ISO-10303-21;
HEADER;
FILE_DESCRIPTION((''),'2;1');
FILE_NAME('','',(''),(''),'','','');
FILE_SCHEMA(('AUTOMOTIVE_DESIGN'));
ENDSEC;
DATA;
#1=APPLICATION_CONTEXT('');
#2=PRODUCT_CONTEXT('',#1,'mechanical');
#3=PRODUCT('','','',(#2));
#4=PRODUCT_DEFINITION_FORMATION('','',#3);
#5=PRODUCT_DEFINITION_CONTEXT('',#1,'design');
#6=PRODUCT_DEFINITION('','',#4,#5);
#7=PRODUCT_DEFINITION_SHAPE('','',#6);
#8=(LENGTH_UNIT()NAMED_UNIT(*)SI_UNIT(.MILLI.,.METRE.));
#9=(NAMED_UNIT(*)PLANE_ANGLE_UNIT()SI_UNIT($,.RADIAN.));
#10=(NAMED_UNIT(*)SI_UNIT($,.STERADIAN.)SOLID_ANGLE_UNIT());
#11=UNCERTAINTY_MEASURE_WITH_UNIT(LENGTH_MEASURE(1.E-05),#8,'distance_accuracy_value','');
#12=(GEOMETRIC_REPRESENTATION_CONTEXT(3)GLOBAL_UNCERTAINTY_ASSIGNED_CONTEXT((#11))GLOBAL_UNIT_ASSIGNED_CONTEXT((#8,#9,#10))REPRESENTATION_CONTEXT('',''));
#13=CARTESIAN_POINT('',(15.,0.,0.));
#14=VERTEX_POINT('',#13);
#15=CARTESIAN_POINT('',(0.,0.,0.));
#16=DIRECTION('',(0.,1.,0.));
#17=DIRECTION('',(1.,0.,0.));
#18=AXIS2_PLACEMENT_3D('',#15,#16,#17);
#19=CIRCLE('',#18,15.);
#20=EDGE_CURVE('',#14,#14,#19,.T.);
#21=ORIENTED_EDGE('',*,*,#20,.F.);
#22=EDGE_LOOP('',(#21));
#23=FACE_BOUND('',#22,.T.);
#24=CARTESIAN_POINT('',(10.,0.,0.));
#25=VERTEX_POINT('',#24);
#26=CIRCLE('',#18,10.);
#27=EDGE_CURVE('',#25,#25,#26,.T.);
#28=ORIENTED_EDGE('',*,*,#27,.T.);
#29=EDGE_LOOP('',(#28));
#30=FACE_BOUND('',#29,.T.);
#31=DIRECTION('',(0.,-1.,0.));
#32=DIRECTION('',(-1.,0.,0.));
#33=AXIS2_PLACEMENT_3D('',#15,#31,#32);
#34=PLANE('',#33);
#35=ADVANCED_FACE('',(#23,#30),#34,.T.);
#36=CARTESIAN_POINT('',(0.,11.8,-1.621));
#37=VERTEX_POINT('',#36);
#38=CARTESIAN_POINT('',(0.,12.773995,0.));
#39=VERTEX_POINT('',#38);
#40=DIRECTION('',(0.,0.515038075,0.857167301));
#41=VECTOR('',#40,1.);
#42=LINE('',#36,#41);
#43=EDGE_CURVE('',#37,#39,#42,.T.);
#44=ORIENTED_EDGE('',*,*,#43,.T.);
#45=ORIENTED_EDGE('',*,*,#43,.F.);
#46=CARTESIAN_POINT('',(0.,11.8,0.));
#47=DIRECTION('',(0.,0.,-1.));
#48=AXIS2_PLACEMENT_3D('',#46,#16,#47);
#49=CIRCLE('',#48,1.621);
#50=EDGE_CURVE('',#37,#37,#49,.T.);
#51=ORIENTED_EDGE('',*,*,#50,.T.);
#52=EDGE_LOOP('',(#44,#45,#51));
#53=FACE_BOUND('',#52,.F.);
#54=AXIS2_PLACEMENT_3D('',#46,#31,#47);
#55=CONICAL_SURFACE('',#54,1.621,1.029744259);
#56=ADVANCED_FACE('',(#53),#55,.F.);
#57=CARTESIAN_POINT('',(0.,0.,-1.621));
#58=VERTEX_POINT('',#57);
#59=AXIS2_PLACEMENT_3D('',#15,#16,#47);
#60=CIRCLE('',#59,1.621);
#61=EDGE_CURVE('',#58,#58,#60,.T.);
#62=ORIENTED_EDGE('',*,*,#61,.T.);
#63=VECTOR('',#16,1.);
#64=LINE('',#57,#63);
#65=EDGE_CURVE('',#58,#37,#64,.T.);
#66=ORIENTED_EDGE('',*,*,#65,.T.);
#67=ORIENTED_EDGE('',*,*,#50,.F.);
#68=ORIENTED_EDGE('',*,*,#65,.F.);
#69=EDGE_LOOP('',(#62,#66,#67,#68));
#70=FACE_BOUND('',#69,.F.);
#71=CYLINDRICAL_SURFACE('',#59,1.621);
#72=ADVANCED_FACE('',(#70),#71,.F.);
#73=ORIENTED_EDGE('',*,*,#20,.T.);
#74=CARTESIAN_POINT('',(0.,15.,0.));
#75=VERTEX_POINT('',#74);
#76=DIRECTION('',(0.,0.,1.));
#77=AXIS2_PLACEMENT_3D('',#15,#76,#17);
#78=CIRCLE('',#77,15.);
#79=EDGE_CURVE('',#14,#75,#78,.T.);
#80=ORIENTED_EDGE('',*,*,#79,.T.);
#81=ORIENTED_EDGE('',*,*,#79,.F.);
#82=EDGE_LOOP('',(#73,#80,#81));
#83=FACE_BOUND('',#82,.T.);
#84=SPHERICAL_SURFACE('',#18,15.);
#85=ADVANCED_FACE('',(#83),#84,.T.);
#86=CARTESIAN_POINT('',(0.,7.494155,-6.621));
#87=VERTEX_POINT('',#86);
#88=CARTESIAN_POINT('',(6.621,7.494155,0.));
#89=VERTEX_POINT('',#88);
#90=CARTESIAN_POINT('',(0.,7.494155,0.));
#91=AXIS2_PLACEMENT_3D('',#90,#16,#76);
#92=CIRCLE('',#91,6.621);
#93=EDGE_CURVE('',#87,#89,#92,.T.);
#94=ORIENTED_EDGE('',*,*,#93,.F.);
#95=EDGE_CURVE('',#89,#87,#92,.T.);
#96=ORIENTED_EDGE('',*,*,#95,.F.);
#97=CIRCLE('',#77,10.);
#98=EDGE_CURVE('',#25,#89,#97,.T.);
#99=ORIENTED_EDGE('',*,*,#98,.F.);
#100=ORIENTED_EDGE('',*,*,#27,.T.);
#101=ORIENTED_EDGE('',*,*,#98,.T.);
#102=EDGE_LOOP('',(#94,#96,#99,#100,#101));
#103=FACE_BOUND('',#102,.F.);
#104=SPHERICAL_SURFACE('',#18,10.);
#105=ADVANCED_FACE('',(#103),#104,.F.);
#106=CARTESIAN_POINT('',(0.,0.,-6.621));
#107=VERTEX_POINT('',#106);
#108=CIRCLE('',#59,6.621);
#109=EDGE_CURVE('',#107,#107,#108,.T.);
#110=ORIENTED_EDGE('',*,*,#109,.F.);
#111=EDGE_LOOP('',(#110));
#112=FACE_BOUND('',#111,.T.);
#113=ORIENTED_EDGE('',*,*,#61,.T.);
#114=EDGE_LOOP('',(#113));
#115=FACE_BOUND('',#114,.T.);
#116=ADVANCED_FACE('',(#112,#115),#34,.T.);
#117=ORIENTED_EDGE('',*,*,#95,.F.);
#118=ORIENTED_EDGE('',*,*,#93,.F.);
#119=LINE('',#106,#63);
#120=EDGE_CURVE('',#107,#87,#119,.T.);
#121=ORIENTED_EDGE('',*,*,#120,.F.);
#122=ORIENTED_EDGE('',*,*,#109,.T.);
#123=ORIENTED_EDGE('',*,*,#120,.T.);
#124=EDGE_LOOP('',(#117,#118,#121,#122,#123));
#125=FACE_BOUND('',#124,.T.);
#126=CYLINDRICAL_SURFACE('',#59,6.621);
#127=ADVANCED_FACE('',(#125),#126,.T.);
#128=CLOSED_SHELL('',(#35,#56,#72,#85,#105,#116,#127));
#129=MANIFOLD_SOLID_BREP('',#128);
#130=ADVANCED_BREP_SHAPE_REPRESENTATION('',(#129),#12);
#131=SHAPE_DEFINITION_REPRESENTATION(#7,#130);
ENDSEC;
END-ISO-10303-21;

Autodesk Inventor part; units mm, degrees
ref_plane "YZ Plane" through (0, 0, 0) normal (1, 0, 0) x (0, 1, 0)
ref_plane "XZ Plane" through (0, 0, 0) normal (0, 1, 0) x (-1, 0, 0)
ref_plane "XY Plane" through (0, 0, 0) normal (0, 0, 1) x (1, 0, 0)
sketch "Sketch1" plane through (0, 0, 0) normal (0, 0, 1) x (1, 0, 0)
  line L0 (0, 0) -> (0, 15)
  line L1 (0, 0) -> (15, 0)
  arc A0 (15, 0) -> (0, 15) centre (0, 0) ccw
  line L2 (0, -3.6213) -> (0, 21.7279) projected
  dimension "d2" = 15
revolve "Revolution1" add sketch "Sketch1" angle 360 about axis through (0, -10, 0) along (0, 1, 0)
sketch "Sketch4" plane through (0, 0, 0) normal (0, -1, 0) x (1, 0, 0)
  point P0 (0, 0)
  point P1 (0, 0)
hole "Hole2" at (0, 0, 0) direction (0, 1, 0) diameter 3.242 depth 11.8 tip angle 118 thread size "M4x0.7" class "6H" standard "ANSI Metric M Profile"
shell "Shell2" thickness 5 removed faces 1 at (10.3911, 0, 1.2617)
properties part number "Ball_Upper Half" material "Nylon 6/6"
